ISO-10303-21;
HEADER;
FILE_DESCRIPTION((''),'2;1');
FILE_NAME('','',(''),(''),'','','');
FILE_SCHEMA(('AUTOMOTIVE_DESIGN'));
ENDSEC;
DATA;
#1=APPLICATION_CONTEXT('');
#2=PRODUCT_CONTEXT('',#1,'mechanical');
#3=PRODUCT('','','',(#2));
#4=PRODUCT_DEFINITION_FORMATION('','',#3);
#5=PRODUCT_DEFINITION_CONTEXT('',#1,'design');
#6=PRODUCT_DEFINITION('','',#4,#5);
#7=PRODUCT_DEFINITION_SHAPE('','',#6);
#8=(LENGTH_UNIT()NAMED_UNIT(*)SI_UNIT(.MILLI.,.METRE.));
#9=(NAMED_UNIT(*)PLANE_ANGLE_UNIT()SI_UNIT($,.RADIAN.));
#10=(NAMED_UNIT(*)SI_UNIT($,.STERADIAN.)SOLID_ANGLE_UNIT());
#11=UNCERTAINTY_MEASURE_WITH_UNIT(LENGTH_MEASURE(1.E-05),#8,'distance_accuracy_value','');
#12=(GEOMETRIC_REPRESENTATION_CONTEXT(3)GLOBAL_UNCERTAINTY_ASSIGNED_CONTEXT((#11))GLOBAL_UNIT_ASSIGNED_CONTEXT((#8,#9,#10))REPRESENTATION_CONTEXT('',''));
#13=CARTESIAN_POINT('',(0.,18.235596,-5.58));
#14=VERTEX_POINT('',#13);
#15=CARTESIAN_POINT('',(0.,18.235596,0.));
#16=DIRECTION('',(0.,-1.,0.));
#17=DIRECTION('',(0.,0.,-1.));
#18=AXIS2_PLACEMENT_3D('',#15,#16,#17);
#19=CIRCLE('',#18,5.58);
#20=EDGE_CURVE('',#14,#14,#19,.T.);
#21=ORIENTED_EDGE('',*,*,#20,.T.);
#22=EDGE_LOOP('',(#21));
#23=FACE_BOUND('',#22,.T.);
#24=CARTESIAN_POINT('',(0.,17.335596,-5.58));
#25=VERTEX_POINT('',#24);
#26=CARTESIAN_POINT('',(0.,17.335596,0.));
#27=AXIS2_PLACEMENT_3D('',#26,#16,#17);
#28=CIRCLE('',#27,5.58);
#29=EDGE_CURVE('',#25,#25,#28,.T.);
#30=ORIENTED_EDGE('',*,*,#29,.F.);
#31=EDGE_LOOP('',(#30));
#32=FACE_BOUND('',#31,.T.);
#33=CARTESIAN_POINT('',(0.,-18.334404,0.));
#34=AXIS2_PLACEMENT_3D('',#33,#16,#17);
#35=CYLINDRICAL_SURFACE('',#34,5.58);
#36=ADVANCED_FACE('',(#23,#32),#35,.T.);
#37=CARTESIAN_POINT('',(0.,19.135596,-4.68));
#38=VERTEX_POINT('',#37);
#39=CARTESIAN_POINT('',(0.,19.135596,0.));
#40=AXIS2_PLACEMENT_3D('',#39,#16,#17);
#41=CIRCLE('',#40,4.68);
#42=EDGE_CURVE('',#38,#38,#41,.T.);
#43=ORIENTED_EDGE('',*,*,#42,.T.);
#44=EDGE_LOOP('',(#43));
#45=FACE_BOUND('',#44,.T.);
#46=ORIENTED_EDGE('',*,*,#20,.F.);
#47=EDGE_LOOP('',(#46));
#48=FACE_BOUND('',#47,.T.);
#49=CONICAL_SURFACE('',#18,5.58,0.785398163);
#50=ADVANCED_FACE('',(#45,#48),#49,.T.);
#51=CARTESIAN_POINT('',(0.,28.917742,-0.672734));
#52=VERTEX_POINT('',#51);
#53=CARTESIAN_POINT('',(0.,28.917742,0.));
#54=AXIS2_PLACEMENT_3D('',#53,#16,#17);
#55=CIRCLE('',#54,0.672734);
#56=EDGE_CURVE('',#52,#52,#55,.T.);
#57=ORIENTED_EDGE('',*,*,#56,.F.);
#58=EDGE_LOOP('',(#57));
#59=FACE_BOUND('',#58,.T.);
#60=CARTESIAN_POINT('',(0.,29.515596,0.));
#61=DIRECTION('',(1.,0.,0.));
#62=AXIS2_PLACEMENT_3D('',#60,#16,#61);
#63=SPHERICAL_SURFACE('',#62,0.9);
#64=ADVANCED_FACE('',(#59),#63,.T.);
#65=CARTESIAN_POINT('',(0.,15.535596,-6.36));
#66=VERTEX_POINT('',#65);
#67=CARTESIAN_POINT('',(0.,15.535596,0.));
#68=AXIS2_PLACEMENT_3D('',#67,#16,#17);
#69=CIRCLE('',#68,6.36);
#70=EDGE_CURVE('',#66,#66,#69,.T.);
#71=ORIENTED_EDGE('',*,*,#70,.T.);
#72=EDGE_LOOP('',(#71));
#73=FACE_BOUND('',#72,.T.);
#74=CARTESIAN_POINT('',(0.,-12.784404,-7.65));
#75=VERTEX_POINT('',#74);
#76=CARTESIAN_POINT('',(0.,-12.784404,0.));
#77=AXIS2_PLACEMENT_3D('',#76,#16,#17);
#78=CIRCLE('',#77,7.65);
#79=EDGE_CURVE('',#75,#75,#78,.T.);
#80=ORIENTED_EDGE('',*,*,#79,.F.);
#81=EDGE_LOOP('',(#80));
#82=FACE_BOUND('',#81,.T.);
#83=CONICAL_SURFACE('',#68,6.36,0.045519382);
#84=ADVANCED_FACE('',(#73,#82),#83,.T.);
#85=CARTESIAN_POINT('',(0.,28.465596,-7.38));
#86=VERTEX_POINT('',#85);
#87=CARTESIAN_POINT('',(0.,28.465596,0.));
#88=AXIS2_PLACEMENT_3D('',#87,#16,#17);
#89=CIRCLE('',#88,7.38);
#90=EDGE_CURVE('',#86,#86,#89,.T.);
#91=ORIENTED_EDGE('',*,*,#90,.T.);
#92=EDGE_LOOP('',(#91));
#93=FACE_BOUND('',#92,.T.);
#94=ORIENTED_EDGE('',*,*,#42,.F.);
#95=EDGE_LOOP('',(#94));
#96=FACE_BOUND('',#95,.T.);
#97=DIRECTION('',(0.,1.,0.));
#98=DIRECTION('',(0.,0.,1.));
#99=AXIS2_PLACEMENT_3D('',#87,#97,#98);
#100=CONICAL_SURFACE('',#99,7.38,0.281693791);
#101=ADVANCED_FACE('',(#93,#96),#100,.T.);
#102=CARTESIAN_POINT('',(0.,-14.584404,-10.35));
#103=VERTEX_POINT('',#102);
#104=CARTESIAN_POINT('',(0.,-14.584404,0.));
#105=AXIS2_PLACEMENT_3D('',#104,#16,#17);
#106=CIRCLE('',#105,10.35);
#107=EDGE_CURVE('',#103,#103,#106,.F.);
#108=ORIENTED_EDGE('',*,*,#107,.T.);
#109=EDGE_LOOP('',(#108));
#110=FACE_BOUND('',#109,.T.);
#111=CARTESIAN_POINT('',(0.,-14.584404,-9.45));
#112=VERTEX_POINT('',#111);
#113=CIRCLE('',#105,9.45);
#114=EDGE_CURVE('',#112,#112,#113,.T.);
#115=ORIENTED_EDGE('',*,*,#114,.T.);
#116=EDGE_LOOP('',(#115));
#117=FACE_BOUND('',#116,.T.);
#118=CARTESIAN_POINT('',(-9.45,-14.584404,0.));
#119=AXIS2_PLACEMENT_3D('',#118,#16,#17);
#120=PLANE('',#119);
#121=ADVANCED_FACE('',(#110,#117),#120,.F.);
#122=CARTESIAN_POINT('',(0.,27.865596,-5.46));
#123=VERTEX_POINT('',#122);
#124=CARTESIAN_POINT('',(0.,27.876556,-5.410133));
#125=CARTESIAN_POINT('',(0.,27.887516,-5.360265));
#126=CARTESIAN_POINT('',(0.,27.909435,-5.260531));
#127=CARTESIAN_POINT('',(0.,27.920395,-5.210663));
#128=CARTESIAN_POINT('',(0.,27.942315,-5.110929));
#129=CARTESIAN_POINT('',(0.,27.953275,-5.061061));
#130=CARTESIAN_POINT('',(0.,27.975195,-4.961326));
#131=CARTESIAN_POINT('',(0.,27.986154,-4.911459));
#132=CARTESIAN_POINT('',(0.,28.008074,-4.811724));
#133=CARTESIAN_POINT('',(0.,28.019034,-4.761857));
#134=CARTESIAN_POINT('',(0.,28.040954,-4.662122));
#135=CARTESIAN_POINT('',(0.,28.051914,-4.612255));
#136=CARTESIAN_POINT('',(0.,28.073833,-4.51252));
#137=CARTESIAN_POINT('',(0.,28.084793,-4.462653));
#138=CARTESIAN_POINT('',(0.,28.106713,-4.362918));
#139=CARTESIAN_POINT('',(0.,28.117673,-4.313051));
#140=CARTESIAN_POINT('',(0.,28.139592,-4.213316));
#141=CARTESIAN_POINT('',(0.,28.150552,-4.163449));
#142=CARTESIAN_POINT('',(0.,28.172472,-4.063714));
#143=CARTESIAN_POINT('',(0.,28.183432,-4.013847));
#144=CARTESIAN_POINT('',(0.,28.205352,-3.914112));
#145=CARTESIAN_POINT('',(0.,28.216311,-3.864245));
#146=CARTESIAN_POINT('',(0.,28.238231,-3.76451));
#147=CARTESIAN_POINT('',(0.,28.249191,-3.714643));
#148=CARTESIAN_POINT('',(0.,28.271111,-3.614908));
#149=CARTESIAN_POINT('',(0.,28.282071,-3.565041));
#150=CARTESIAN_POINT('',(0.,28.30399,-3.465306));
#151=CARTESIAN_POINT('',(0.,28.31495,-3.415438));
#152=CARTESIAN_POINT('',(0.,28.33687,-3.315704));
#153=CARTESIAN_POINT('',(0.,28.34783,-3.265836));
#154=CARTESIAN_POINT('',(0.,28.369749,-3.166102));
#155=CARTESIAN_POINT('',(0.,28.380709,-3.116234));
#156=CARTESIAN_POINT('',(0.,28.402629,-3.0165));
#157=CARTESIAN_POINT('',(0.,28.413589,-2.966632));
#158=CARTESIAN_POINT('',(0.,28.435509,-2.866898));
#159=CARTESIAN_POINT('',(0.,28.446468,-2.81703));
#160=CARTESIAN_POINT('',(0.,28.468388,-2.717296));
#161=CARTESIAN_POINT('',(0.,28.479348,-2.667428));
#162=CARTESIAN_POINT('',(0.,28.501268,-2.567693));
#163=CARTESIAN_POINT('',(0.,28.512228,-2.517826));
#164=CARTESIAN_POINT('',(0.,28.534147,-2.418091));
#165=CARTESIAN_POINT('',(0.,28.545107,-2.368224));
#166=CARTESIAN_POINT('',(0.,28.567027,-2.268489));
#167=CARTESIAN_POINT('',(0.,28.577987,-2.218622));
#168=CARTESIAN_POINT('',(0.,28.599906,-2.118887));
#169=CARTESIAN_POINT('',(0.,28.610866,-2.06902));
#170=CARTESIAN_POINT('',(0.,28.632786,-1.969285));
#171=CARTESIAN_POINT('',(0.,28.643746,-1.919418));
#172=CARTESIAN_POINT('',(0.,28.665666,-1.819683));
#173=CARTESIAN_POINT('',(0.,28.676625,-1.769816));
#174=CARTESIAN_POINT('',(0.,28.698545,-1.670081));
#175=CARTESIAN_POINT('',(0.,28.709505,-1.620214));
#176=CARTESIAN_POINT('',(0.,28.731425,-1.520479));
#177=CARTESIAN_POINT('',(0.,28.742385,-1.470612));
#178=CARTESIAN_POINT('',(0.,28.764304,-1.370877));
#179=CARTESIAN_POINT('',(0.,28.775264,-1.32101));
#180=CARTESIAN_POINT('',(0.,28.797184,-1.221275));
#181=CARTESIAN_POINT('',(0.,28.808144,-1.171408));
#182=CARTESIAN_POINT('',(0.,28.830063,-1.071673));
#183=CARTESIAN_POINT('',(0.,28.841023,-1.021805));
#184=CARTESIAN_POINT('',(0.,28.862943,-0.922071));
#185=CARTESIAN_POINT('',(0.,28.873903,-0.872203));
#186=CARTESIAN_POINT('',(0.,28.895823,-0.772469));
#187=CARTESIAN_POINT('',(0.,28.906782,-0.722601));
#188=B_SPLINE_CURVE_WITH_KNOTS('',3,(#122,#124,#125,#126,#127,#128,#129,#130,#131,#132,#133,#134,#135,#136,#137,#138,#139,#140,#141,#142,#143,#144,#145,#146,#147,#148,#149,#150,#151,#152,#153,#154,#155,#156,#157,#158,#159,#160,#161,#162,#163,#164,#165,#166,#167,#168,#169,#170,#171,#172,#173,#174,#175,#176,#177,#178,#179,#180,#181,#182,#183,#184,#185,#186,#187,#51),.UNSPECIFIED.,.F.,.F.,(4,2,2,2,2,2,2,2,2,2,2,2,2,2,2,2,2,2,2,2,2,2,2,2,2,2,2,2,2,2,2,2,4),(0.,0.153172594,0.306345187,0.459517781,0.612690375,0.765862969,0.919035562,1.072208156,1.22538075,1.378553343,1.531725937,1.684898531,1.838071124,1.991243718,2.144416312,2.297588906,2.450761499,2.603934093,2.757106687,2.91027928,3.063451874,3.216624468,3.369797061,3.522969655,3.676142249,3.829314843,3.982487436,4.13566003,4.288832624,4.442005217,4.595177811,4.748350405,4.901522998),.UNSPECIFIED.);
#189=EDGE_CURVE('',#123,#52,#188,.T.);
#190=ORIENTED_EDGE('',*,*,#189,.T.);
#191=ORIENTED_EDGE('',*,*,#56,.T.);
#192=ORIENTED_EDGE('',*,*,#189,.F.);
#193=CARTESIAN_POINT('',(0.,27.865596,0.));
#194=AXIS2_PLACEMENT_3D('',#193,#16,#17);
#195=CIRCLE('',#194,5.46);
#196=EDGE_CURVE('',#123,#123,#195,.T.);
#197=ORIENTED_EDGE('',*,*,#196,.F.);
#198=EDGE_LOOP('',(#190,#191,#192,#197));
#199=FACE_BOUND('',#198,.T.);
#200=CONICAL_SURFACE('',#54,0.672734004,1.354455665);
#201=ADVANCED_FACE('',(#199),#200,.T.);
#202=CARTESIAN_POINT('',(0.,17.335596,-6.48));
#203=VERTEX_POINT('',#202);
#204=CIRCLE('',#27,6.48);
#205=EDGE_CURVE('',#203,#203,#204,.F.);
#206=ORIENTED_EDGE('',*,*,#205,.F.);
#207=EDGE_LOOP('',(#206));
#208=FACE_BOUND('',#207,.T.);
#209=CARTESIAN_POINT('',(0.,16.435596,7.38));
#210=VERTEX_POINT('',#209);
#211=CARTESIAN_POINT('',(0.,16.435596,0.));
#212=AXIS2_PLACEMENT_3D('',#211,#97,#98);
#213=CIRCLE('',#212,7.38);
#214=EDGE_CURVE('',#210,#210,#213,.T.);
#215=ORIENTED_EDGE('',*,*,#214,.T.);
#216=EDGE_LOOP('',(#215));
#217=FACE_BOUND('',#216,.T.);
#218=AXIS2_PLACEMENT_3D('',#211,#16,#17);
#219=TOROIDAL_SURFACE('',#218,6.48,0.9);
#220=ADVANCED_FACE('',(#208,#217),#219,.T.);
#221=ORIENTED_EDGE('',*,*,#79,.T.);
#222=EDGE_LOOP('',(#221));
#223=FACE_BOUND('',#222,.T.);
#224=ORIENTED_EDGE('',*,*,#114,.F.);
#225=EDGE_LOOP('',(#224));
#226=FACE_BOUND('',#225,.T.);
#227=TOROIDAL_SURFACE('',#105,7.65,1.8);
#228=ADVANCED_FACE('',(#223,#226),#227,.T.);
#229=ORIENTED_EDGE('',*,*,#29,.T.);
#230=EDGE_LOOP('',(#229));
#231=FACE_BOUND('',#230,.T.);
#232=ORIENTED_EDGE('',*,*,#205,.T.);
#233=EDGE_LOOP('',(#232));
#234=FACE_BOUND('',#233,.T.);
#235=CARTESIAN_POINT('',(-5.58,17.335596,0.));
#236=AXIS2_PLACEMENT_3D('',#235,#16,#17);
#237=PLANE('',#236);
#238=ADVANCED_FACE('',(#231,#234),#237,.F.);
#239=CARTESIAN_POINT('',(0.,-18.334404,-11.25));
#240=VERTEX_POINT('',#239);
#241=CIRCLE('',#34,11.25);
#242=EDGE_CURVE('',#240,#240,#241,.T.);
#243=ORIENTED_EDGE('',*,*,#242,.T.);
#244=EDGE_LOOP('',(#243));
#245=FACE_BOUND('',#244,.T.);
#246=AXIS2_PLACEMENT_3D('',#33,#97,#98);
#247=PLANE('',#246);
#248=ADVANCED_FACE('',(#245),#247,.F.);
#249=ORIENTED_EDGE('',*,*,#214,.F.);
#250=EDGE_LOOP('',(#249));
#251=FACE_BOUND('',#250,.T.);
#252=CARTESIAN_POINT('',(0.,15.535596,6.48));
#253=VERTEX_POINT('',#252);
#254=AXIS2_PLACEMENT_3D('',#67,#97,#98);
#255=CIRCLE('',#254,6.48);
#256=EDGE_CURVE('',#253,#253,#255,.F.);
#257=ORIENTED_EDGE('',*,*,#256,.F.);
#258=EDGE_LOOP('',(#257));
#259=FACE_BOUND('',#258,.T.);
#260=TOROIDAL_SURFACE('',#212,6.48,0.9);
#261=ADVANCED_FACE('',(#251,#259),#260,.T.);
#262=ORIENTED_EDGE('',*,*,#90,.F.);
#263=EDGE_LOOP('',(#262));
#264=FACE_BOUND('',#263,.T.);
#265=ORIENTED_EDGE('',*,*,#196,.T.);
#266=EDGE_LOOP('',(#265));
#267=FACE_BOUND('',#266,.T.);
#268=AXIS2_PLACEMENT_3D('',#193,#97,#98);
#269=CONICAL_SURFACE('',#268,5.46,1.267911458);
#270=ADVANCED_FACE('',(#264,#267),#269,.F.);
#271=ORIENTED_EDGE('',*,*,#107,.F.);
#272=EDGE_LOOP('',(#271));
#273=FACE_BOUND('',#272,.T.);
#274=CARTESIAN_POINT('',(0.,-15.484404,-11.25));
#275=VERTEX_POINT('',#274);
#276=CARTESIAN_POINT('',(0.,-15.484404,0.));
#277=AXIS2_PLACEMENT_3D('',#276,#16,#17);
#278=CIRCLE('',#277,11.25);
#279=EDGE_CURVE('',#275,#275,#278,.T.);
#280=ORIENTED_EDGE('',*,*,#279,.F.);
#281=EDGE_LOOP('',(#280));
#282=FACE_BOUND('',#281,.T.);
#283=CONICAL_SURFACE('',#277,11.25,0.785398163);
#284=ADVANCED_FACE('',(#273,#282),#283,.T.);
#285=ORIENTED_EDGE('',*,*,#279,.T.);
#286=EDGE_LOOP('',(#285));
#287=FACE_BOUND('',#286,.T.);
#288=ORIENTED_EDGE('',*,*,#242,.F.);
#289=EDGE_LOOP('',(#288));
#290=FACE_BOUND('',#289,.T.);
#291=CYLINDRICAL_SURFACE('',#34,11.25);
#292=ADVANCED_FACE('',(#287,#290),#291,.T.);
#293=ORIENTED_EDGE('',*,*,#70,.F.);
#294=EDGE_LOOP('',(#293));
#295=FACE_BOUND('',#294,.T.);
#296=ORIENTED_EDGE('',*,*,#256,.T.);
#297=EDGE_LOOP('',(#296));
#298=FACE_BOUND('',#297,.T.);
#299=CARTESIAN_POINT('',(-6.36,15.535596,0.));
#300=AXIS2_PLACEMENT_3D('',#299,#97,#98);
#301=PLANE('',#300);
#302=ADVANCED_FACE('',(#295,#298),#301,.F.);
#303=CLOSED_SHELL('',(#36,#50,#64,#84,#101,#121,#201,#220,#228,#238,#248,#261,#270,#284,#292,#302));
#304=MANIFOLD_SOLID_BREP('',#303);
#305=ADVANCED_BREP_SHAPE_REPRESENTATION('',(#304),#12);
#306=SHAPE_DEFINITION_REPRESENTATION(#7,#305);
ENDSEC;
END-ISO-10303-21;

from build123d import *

# Parameters (mm, degrees)
CHAMFER1_SIZE = 0.03
FILLET1_R     = 0.06
FILLET2_R     = 0.03


# Read off the part's stored shape, not the designer's step: Scale1
with BuildPart() as part:
    # Sketch1 → Revolve1 (revolve)
    with BuildSketch(Plane.XY, mode=Mode.PRIVATE) as revolve1_sk:
        with BuildLine():
            Line((0, 0), (-0.375, 0))
            Line((-0.375, 0), (-0.375, 0.125))
            Line((-0.375, 0.125), (-0.315, 0.125))
            Line((-0.315, 0.125), (-0.315, 0.185))
            Line((-0.315, 0.185), (-0.255, 0.185))
            Line((-0.255, 0.185), (-0.212, 1.129))
            Line((-0.212, 1.129), (-0.246, 1.129))
            Line((-0.246, 1.129), (-0.246, 1.189))
            Line((-0.246, 1.189), (-0.186, 1.189))
            Line((-0.186, 1.189), (-0.186, 1.249))
            Line((-0.186, 1.249), (-0.156, 1.249))
            Line((-0.156, 1.249), (-0.246, 1.56))
            Line((-0.246, 1.56), (-0.182, 1.54))
            Line((-0.182, 1.54), (-0.022424467, 1.575071546))
            ThreePointArc((-0.022424467, 1.575071546), (-0.027366527, 1.607291183), (0, 1.625))
            Line((0, 1.625), (0, 0))
        make_face()
    revolve(revolve1_sk.sketch.rotate(Axis((0, 0, 0), (0, 1, 0)), 270), axis=Axis((0, 0, 0), (0, 1, 0)))

    # Chamfer1
    chamfer1_edges = [part.edges().sort_by_distance(p)[0] for p in [
        (0, 0.125, 0.375),
        (0, 1.249, 0.186),
    ]]
    chamfer(chamfer1_edges, length=CHAMFER1_SIZE - 0.0001)  # a hair under: the kernel refuses the full size

    # Fillet1
    fillet1_edges = [part.edges().sort_by_distance(p)[0] for p in [
        (0, 0.185, 0.315),
    ]]
    fillet(fillet1_edges, radius=FILLET1_R - 0.0001)  # a hair under: the kernel refuses the full size

    # Fillet2
    fillet2_edges = [part.edges().sort_by_distance(p)[0] for p in [
        (0, 1.129, 0.246),
        (0, 1.189, 0.246),
    ]]
    fillet(fillet2_edges, radius=FILLET2_R - 0.0001)  # a hair under: the kernel refuses the full size

    # Scale1 outline → Scale1 (revolve)
    with BuildSketch(Plane.XY):
        with BuildLine():
            Line((5.46, 27.865595941), (0.672734004, 28.917742313))
            ThreePointArc((0.672734004, 28.917742313), (0.820995818, 29.884331439), (0, 30.415595941))
            Line((0, 30.415595941), (0, 1.625))
            ThreePointArc((0, 1.625), (0.027366527, 1.607291183), (0.022424467, 1.575071546))
            Line((0.022424467, 1.575071546), (0.182, 1.54))
            Line((0.182, 1.54), (0.246, 1.56))
            Line((0.246, 1.56), (0.156, 1.249))
            Line((0.156, 1.249), (0.186, 1.219))
            Line((0.186, 1.219), (0.186, 1.189))
            Line((0.186, 1.189), (0.216, 1.189))
            ThreePointArc((0.216, 1.189), (0.237213203, 1.180213203), (0.246, 1.159))
            ThreePointArc((0.246, 1.159), (0.237213203, 1.137786797), (0.216, 1.129))
            Line((0.216, 1.129), (0.212, 1.129))
            Line((0.212, 1.129), (0.255, 0.185))
            ThreePointArc((0.255, 0.185), (0.297426407, 0.167426407), (0.315, 0.125))
            Line((0.315, 0.125), (0.345, 0.125))
            Line((0.345, 0.125), (0.375, 0.095))
            Line((0.375, 0.095), (0.375, 0))
            Line((0.375, 0), (0, 0))
            Line((0, 0), (0, -18.334404059))
            Line((0, -18.334404059), (11.25, -18.334404059))
            Line((11.25, -18.334404059), (11.25, -15.484404059))
            Line((11.25, -15.484404059), (10.35, -14.584404059))
            Line((10.35, -14.584404059), (9.45, -14.584404059))
            ThreePointArc((9.45, -14.584404059), (8.922792206, -13.311611853), (7.65, -12.784404059))
            Line((7.65, -12.784404059), (6.36, 15.535595941))
            Line((6.36, 15.535595941), (6.48, 15.535595941))
            ThreePointArc((6.48, 15.535595941), (7.116396103, 15.799199838), (7.38, 16.435595941))
            ThreePointArc((7.38, 16.435595941), (7.116396103, 17.071992044), (6.48, 17.335595941))
            Line((6.48, 17.335595941), (5.58, 17.335595941))
            Line((5.58, 17.335595941), (5.58, 18.235595941))
            Line((5.58, 18.235595941), (4.68, 19.135595941))
            Line((4.68, 19.135595941), (7.38, 28.465595941))
            Line((7.38, 28.465595941), (5.46, 27.865595941))
        make_face()
    revolve(axis=Axis((0, 0, 0), (0, 1, 0)))


solid = part.part
